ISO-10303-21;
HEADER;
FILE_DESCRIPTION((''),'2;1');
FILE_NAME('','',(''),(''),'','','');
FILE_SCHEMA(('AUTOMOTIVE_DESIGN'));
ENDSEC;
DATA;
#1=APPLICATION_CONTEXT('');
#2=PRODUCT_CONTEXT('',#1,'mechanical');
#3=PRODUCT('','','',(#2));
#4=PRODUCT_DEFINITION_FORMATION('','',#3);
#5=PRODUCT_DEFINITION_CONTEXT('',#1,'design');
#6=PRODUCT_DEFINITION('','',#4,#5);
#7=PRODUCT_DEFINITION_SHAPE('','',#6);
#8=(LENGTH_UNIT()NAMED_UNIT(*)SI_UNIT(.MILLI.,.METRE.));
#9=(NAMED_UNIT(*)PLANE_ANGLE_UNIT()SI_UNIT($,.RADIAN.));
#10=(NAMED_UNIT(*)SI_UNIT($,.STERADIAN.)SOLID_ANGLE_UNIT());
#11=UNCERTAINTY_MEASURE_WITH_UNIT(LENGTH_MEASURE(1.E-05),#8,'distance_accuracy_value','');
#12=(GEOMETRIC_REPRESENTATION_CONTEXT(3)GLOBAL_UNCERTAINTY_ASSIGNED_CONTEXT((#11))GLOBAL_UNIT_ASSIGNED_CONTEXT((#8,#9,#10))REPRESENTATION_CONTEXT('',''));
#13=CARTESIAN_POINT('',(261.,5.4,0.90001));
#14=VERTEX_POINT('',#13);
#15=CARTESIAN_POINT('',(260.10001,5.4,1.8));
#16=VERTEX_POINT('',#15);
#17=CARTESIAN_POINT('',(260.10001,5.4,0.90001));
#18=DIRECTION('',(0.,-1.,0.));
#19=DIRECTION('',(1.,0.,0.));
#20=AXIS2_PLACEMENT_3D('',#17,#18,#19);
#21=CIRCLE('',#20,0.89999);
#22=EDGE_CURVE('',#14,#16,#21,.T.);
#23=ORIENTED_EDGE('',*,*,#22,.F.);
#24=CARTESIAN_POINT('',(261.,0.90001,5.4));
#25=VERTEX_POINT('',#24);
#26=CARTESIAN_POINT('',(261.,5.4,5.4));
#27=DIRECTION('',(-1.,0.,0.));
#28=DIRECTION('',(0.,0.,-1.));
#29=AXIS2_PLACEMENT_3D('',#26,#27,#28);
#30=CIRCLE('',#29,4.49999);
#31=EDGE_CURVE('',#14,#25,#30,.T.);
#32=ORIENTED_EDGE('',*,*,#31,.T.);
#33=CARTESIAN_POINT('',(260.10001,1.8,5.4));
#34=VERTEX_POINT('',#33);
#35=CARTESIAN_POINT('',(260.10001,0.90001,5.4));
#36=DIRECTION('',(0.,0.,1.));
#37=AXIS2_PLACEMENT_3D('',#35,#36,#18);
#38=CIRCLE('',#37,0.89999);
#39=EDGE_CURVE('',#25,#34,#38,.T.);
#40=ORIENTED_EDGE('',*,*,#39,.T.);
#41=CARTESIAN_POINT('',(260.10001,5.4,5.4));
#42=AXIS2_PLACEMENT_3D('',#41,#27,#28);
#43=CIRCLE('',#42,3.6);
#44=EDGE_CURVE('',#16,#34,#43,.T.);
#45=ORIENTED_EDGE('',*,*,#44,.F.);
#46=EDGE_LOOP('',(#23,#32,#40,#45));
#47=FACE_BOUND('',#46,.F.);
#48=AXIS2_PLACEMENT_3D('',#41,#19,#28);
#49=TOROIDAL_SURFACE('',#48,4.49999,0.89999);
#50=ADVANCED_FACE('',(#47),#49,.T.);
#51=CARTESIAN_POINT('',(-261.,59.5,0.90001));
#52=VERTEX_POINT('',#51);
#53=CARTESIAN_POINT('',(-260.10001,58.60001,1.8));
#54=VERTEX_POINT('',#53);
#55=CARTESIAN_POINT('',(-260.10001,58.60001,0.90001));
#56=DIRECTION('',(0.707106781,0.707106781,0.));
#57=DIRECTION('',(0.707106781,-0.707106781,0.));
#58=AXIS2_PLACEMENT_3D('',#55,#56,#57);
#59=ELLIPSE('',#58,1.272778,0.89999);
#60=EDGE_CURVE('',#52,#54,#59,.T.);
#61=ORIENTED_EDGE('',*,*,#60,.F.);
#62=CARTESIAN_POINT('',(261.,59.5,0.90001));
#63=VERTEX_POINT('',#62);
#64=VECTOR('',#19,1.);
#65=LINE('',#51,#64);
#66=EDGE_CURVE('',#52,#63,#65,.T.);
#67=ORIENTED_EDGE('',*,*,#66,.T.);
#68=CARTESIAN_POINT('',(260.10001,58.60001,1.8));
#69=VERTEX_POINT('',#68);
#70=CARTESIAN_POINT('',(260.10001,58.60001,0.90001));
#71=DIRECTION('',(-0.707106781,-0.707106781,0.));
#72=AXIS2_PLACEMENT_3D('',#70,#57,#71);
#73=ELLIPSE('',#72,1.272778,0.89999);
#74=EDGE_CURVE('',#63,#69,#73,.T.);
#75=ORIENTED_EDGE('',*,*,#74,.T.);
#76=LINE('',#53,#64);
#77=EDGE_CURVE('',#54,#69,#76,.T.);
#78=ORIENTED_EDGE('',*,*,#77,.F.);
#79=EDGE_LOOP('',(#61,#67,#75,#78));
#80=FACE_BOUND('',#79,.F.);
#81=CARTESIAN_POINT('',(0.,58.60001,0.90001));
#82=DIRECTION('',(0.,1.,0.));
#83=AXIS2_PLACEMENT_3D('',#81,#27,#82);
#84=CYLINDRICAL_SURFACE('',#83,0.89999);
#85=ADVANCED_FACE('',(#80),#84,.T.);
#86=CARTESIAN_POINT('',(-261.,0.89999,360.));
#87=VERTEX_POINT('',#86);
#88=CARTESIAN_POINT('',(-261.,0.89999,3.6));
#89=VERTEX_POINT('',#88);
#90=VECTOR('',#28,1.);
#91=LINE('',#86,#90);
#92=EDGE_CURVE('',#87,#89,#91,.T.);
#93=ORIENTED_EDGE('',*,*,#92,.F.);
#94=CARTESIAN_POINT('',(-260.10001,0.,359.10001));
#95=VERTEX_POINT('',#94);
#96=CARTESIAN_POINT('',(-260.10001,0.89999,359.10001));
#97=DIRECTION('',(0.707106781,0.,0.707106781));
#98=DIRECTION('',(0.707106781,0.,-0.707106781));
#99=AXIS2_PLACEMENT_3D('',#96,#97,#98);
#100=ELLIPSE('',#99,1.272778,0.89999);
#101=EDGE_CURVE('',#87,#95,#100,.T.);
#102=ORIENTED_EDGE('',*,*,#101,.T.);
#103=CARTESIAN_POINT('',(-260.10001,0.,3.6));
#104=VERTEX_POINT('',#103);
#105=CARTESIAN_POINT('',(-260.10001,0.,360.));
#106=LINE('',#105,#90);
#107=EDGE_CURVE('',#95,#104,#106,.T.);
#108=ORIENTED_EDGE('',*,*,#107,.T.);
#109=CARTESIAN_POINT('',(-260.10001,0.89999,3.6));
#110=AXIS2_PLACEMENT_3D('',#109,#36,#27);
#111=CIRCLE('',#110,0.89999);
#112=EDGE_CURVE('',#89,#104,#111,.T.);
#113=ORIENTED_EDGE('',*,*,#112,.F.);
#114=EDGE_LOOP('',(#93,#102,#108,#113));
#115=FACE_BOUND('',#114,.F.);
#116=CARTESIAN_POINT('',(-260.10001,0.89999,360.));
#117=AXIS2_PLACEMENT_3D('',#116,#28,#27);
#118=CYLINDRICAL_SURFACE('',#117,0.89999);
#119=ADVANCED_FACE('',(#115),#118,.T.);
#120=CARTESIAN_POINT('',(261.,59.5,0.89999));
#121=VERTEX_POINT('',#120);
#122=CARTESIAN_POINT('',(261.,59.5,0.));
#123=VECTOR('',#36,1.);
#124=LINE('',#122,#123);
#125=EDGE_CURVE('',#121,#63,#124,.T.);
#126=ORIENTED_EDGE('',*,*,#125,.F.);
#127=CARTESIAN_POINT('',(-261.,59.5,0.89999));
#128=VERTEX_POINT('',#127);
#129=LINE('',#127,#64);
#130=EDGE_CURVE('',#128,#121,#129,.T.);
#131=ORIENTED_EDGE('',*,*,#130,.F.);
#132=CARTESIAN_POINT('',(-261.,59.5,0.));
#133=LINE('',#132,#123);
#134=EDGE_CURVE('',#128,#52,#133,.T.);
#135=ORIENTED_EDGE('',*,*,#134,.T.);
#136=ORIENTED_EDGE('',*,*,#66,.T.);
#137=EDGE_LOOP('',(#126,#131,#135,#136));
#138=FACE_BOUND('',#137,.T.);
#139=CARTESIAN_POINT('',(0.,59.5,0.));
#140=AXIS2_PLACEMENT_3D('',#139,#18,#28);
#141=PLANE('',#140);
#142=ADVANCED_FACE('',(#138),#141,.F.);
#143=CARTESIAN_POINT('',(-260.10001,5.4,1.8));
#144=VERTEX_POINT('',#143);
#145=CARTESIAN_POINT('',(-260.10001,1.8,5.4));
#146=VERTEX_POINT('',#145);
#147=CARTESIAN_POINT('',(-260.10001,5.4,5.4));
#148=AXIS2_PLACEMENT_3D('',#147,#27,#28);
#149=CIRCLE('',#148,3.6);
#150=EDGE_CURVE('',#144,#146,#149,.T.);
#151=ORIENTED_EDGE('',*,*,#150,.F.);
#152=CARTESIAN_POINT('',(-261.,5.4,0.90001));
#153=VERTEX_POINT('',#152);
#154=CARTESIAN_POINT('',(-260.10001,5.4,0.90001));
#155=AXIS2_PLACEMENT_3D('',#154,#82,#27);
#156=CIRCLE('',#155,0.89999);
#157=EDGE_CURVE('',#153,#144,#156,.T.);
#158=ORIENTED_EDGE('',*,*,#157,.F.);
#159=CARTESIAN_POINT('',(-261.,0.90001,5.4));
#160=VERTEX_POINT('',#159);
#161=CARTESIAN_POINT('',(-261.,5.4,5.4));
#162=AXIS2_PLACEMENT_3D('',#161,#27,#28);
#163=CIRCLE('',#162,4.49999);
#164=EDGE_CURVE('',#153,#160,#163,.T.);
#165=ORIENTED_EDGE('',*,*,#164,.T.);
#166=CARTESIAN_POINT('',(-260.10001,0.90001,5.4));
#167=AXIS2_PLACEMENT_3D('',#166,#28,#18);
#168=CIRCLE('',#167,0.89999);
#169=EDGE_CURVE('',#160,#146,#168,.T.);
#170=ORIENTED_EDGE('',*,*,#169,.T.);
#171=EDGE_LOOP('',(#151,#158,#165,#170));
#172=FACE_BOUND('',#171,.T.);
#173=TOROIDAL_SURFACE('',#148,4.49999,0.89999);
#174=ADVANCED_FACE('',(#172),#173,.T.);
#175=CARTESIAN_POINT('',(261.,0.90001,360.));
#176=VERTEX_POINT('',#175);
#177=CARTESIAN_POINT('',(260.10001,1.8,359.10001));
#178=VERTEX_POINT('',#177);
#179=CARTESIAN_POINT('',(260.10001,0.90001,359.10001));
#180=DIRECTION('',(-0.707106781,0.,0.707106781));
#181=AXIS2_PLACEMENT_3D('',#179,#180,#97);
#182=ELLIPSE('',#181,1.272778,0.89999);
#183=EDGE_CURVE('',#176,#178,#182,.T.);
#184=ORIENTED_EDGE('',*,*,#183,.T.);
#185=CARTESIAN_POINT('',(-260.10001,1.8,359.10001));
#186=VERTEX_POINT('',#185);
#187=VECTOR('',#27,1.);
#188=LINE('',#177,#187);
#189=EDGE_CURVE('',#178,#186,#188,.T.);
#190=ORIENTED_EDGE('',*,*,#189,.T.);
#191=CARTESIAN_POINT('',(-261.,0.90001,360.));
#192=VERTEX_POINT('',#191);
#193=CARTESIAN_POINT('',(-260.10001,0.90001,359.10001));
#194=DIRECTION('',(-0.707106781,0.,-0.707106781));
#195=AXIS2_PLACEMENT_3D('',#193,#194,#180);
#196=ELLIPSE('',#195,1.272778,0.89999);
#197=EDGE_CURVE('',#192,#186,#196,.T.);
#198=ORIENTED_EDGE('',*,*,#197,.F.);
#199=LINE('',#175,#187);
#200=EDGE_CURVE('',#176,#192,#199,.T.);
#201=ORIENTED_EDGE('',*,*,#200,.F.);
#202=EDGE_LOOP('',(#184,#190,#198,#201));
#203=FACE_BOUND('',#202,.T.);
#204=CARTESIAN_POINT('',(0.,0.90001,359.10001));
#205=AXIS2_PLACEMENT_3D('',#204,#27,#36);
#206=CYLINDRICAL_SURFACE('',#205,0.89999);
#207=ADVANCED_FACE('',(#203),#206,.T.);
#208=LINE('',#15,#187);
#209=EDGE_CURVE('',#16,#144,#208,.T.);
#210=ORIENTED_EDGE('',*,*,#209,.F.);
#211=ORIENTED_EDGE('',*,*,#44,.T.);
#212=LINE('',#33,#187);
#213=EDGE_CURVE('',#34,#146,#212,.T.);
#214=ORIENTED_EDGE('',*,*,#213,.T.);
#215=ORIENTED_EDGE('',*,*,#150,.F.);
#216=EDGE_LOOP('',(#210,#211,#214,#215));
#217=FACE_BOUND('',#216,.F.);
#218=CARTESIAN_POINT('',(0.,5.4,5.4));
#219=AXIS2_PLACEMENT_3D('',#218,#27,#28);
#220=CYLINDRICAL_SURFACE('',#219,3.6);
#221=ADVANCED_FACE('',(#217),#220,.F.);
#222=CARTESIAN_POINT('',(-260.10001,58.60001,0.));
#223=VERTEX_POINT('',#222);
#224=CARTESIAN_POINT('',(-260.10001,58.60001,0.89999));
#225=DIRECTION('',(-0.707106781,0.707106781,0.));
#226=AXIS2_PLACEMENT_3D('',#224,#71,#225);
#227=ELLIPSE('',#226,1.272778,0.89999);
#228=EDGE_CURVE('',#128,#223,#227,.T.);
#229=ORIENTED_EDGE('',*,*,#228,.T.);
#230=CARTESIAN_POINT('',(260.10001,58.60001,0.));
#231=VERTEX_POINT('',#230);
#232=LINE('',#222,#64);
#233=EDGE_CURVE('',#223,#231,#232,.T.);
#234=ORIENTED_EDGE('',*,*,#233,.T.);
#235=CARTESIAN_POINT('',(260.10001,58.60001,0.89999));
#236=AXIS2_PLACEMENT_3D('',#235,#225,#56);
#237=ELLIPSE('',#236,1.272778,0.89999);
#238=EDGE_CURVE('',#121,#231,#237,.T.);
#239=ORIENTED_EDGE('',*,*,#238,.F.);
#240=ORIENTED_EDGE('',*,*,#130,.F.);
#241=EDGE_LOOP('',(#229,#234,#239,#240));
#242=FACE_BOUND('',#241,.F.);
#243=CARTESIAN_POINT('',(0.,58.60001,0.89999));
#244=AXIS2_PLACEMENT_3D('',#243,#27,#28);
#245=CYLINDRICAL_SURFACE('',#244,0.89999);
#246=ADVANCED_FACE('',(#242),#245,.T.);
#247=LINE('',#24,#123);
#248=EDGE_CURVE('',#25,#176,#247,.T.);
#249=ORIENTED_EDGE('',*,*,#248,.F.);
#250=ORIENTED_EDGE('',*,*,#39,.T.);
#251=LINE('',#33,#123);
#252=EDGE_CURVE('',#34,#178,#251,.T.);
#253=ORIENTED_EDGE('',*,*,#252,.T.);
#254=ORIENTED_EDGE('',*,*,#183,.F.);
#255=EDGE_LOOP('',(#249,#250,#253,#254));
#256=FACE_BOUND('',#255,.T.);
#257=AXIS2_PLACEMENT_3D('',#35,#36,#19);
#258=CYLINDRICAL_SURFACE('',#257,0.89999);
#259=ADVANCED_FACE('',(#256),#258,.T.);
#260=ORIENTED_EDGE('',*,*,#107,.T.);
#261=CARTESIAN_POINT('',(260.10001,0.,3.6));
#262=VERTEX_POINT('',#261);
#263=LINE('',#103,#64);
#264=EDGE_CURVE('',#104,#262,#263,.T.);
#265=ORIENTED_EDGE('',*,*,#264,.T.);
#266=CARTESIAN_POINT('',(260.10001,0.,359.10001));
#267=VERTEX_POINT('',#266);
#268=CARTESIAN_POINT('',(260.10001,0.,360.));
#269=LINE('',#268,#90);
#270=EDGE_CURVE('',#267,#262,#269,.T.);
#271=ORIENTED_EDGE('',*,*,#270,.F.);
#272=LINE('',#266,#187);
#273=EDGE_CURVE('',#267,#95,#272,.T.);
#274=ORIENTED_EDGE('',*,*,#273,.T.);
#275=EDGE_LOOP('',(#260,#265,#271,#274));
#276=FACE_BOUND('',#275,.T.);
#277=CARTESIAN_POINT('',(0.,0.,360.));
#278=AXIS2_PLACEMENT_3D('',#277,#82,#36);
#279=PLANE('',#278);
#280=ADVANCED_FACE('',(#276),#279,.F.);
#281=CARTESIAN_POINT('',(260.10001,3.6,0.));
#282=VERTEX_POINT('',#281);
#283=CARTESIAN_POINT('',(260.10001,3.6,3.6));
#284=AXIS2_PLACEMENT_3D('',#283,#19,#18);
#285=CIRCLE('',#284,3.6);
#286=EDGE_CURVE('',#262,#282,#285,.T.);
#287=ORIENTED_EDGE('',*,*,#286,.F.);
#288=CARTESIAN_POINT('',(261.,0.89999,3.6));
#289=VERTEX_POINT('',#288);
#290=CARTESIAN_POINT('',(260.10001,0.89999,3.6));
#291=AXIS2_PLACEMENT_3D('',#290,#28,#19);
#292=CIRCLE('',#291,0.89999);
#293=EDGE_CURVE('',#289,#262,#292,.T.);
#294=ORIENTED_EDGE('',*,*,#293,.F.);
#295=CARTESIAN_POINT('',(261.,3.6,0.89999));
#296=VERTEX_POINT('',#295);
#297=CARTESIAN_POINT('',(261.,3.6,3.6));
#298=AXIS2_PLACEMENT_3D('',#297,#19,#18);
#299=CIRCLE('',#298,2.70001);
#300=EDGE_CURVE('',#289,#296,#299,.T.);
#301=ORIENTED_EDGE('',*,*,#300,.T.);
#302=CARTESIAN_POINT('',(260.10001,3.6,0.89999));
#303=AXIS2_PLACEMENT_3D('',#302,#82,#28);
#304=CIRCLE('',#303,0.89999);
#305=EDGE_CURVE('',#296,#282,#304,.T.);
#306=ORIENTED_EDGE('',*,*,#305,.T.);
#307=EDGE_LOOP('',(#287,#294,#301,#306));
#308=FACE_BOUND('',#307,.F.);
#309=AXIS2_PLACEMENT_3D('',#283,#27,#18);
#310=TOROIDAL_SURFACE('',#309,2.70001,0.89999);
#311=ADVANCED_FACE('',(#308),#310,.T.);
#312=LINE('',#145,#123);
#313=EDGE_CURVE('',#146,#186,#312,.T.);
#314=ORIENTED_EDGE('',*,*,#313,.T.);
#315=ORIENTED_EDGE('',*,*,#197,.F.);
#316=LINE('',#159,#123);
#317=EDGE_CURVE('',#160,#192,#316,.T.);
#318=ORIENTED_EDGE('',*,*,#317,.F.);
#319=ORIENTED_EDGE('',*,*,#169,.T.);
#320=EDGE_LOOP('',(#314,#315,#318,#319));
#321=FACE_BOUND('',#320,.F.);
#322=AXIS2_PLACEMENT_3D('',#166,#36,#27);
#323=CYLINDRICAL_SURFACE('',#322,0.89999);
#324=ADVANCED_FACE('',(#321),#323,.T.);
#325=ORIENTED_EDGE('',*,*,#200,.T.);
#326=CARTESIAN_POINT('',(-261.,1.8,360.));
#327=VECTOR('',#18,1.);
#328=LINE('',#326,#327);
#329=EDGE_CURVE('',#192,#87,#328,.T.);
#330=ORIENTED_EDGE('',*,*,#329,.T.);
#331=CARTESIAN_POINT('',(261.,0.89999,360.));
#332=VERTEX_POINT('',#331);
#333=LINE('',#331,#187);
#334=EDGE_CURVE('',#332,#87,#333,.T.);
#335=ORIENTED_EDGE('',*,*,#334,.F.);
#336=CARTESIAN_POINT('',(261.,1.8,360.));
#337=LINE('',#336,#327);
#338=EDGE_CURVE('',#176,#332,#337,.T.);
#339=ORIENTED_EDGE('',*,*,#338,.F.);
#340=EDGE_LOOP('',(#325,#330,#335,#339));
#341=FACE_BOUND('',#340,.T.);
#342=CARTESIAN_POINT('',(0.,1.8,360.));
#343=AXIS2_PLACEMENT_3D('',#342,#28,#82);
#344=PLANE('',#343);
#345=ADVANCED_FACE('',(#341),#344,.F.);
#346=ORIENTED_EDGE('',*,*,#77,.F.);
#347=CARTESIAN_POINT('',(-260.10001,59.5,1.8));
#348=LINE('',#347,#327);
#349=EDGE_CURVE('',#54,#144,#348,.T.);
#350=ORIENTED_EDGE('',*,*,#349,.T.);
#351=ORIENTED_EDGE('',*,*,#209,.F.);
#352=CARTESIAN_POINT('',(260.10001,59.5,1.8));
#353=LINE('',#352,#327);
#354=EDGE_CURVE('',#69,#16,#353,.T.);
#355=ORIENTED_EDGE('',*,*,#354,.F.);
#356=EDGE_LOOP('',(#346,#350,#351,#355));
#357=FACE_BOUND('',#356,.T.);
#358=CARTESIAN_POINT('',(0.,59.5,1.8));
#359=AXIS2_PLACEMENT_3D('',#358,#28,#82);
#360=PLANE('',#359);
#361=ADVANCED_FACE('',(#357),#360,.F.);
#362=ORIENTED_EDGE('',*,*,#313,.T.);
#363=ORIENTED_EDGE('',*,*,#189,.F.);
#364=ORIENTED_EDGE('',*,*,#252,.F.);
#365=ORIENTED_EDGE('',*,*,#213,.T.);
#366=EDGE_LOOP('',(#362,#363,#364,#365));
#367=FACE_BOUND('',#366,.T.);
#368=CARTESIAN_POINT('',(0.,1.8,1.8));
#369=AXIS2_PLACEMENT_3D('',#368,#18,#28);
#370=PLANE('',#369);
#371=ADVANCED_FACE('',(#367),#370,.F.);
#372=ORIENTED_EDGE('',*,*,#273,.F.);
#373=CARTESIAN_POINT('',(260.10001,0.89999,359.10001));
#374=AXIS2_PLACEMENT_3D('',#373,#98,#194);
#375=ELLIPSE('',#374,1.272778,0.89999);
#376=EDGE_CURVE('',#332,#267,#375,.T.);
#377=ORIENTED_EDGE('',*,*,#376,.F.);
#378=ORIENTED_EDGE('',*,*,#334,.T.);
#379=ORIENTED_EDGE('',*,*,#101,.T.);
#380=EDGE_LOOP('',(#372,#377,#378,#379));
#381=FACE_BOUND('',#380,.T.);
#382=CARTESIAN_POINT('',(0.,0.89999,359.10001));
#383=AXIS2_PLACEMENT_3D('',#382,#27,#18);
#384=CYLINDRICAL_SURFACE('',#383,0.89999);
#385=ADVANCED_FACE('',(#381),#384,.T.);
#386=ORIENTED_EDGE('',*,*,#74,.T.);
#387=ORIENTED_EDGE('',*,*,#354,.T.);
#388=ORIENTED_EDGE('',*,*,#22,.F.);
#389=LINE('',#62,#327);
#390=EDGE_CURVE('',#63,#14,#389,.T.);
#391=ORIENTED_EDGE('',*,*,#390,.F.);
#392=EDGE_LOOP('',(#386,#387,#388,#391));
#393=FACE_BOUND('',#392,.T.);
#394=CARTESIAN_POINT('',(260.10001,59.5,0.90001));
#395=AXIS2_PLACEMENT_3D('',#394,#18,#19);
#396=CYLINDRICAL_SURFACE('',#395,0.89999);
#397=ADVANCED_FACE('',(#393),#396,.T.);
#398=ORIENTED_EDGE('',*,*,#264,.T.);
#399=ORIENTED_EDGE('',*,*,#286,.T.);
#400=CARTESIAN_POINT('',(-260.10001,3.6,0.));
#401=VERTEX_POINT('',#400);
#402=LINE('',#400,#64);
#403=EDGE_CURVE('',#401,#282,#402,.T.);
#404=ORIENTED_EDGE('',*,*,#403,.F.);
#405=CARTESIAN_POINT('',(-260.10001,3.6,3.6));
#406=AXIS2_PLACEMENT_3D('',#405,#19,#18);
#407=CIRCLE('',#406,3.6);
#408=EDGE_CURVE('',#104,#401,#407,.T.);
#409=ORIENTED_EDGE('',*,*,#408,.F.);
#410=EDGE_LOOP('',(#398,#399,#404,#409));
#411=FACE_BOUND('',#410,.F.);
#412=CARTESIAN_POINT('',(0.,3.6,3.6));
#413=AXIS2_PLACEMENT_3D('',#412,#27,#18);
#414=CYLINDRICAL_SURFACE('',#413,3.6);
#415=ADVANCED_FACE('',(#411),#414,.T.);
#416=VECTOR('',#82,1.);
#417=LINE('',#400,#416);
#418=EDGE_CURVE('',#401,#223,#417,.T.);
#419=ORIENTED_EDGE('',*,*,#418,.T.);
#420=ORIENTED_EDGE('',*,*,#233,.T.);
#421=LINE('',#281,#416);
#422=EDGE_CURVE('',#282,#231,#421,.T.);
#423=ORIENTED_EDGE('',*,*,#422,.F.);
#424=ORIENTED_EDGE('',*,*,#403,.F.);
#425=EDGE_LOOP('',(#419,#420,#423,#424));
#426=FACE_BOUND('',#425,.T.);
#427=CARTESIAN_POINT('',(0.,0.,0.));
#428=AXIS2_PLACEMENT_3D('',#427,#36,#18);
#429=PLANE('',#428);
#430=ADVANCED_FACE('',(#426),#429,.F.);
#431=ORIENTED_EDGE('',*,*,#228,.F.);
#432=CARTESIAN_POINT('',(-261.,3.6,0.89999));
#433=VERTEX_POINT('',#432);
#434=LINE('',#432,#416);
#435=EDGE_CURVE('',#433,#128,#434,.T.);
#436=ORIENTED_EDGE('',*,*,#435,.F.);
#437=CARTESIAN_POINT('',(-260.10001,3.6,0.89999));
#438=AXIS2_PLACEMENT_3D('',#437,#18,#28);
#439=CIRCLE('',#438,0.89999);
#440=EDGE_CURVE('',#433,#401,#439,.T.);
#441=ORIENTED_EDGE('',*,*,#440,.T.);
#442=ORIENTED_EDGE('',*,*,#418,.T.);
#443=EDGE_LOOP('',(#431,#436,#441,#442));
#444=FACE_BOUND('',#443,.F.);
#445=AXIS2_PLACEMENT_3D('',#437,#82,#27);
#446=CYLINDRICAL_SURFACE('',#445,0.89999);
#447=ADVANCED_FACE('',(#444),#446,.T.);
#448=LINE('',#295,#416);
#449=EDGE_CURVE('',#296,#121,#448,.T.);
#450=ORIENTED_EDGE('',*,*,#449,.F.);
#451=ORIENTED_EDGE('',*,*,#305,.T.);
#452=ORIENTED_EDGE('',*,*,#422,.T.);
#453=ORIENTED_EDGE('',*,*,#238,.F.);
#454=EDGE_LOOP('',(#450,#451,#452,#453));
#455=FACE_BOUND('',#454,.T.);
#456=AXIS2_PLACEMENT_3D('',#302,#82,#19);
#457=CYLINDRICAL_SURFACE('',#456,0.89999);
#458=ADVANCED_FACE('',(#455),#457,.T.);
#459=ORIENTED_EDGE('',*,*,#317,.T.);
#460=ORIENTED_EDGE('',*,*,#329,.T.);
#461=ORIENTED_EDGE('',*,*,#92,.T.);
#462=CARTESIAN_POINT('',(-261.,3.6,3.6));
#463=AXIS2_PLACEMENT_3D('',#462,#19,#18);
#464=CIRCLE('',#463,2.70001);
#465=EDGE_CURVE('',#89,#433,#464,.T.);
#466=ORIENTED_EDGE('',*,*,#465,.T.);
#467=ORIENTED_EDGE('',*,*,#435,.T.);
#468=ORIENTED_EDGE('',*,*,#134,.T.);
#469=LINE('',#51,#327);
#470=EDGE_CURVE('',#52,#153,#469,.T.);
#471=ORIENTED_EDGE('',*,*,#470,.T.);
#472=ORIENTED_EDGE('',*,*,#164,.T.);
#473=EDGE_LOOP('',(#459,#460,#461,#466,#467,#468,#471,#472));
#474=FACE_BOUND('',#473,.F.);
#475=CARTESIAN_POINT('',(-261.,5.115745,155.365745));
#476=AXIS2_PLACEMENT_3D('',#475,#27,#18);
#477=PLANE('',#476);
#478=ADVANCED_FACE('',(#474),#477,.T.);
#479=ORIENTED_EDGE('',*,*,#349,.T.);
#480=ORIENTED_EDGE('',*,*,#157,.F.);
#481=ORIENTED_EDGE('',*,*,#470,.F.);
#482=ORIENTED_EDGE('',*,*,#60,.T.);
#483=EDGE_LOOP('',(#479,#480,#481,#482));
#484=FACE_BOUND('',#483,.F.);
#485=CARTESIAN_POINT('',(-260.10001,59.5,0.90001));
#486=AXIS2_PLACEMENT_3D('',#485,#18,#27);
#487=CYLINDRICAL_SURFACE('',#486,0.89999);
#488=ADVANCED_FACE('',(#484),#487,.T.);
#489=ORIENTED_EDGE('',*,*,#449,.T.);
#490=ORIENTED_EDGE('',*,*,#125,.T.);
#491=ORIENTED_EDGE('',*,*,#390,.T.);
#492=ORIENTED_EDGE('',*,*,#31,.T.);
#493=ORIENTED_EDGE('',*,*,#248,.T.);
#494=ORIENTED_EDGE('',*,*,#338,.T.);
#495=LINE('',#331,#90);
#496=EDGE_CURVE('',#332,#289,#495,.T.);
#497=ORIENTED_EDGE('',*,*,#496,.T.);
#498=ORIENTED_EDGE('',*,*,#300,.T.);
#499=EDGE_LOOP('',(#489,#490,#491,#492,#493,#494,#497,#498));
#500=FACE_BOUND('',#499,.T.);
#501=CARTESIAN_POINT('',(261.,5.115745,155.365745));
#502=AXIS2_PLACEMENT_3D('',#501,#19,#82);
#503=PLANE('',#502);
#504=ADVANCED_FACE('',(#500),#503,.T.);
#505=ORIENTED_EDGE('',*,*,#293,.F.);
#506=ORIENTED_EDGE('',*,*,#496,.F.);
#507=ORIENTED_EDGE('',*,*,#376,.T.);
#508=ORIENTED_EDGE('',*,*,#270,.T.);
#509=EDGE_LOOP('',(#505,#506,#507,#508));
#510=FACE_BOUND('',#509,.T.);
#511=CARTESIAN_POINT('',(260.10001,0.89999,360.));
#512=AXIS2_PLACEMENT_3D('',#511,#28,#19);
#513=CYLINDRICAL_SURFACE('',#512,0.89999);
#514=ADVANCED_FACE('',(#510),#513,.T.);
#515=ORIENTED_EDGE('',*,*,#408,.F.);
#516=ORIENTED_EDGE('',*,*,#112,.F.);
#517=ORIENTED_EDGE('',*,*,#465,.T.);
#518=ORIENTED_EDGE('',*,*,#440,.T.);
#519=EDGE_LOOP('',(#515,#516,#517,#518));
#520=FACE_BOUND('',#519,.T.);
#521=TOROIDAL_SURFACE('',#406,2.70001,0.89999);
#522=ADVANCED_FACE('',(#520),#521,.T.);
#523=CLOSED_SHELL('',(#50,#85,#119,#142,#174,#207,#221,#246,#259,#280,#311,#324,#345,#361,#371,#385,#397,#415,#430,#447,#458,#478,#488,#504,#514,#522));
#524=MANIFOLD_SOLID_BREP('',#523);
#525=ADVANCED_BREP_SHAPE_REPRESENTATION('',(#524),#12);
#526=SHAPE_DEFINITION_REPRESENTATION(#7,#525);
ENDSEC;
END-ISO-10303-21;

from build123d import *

# Parameters (mm, degrees)
F2_DEPTH = 261
F3_R     = 3.6
F4_R     = 0.89999


# Not quite as in the source:
# - a fillet or chamfer is up to 0.001 mm smaller than in the source, because OpenCascade refuses the exact size


with BuildPart() as f2:
    # F1 (on Right) → F2 (new body)
    with BuildSketch(Plane.YZ):
        Polygon((0, 360), (0, 0), (59.5, 0), (59.5, 1.8), (1.8, 1.8), (1.8, 360), align=None)
    extrude(amount=F2_DEPTH)

    # F3
    f3_edges = [f2.edges().sort_by_distance(p)[0] for p in [
        (130.5, 1.8, 1.8),
        (130.5, 0, 0),
    ]]
    fillet(f3_edges, radius=F3_R)

    # F4 (radius 0.9 in the source; OpenCascade refuses exactly that, so slightly less here)
    f4_edges = [f2.edges().sort_by_distance(p)[0] for p in [
        (261, 32.45, 1.8),
        (261, 31.55, 0),
        (130.5, 59.5, 1.8),
        (130.5, 59.5, 0),
        (261, 1.8, 182.7),
        (261, 0, 181.8),
        (130.5, 0, 360),
        (130.5, 1.8, 360),
        (261, 1.054416, 1.054416),
    ]]
    fillet(f4_edges, radius=F4_R)

    # F5: F2 across face


with BuildPart() as f2_1:
    add(f2.part)
    add(f2.part.mirror(Plane(origin=(0, 4.9930290886, 155.2430290886), x_dir=(0, 1, 0), z_dir=(-1, 0, 0))))


solid = f2_1.part
